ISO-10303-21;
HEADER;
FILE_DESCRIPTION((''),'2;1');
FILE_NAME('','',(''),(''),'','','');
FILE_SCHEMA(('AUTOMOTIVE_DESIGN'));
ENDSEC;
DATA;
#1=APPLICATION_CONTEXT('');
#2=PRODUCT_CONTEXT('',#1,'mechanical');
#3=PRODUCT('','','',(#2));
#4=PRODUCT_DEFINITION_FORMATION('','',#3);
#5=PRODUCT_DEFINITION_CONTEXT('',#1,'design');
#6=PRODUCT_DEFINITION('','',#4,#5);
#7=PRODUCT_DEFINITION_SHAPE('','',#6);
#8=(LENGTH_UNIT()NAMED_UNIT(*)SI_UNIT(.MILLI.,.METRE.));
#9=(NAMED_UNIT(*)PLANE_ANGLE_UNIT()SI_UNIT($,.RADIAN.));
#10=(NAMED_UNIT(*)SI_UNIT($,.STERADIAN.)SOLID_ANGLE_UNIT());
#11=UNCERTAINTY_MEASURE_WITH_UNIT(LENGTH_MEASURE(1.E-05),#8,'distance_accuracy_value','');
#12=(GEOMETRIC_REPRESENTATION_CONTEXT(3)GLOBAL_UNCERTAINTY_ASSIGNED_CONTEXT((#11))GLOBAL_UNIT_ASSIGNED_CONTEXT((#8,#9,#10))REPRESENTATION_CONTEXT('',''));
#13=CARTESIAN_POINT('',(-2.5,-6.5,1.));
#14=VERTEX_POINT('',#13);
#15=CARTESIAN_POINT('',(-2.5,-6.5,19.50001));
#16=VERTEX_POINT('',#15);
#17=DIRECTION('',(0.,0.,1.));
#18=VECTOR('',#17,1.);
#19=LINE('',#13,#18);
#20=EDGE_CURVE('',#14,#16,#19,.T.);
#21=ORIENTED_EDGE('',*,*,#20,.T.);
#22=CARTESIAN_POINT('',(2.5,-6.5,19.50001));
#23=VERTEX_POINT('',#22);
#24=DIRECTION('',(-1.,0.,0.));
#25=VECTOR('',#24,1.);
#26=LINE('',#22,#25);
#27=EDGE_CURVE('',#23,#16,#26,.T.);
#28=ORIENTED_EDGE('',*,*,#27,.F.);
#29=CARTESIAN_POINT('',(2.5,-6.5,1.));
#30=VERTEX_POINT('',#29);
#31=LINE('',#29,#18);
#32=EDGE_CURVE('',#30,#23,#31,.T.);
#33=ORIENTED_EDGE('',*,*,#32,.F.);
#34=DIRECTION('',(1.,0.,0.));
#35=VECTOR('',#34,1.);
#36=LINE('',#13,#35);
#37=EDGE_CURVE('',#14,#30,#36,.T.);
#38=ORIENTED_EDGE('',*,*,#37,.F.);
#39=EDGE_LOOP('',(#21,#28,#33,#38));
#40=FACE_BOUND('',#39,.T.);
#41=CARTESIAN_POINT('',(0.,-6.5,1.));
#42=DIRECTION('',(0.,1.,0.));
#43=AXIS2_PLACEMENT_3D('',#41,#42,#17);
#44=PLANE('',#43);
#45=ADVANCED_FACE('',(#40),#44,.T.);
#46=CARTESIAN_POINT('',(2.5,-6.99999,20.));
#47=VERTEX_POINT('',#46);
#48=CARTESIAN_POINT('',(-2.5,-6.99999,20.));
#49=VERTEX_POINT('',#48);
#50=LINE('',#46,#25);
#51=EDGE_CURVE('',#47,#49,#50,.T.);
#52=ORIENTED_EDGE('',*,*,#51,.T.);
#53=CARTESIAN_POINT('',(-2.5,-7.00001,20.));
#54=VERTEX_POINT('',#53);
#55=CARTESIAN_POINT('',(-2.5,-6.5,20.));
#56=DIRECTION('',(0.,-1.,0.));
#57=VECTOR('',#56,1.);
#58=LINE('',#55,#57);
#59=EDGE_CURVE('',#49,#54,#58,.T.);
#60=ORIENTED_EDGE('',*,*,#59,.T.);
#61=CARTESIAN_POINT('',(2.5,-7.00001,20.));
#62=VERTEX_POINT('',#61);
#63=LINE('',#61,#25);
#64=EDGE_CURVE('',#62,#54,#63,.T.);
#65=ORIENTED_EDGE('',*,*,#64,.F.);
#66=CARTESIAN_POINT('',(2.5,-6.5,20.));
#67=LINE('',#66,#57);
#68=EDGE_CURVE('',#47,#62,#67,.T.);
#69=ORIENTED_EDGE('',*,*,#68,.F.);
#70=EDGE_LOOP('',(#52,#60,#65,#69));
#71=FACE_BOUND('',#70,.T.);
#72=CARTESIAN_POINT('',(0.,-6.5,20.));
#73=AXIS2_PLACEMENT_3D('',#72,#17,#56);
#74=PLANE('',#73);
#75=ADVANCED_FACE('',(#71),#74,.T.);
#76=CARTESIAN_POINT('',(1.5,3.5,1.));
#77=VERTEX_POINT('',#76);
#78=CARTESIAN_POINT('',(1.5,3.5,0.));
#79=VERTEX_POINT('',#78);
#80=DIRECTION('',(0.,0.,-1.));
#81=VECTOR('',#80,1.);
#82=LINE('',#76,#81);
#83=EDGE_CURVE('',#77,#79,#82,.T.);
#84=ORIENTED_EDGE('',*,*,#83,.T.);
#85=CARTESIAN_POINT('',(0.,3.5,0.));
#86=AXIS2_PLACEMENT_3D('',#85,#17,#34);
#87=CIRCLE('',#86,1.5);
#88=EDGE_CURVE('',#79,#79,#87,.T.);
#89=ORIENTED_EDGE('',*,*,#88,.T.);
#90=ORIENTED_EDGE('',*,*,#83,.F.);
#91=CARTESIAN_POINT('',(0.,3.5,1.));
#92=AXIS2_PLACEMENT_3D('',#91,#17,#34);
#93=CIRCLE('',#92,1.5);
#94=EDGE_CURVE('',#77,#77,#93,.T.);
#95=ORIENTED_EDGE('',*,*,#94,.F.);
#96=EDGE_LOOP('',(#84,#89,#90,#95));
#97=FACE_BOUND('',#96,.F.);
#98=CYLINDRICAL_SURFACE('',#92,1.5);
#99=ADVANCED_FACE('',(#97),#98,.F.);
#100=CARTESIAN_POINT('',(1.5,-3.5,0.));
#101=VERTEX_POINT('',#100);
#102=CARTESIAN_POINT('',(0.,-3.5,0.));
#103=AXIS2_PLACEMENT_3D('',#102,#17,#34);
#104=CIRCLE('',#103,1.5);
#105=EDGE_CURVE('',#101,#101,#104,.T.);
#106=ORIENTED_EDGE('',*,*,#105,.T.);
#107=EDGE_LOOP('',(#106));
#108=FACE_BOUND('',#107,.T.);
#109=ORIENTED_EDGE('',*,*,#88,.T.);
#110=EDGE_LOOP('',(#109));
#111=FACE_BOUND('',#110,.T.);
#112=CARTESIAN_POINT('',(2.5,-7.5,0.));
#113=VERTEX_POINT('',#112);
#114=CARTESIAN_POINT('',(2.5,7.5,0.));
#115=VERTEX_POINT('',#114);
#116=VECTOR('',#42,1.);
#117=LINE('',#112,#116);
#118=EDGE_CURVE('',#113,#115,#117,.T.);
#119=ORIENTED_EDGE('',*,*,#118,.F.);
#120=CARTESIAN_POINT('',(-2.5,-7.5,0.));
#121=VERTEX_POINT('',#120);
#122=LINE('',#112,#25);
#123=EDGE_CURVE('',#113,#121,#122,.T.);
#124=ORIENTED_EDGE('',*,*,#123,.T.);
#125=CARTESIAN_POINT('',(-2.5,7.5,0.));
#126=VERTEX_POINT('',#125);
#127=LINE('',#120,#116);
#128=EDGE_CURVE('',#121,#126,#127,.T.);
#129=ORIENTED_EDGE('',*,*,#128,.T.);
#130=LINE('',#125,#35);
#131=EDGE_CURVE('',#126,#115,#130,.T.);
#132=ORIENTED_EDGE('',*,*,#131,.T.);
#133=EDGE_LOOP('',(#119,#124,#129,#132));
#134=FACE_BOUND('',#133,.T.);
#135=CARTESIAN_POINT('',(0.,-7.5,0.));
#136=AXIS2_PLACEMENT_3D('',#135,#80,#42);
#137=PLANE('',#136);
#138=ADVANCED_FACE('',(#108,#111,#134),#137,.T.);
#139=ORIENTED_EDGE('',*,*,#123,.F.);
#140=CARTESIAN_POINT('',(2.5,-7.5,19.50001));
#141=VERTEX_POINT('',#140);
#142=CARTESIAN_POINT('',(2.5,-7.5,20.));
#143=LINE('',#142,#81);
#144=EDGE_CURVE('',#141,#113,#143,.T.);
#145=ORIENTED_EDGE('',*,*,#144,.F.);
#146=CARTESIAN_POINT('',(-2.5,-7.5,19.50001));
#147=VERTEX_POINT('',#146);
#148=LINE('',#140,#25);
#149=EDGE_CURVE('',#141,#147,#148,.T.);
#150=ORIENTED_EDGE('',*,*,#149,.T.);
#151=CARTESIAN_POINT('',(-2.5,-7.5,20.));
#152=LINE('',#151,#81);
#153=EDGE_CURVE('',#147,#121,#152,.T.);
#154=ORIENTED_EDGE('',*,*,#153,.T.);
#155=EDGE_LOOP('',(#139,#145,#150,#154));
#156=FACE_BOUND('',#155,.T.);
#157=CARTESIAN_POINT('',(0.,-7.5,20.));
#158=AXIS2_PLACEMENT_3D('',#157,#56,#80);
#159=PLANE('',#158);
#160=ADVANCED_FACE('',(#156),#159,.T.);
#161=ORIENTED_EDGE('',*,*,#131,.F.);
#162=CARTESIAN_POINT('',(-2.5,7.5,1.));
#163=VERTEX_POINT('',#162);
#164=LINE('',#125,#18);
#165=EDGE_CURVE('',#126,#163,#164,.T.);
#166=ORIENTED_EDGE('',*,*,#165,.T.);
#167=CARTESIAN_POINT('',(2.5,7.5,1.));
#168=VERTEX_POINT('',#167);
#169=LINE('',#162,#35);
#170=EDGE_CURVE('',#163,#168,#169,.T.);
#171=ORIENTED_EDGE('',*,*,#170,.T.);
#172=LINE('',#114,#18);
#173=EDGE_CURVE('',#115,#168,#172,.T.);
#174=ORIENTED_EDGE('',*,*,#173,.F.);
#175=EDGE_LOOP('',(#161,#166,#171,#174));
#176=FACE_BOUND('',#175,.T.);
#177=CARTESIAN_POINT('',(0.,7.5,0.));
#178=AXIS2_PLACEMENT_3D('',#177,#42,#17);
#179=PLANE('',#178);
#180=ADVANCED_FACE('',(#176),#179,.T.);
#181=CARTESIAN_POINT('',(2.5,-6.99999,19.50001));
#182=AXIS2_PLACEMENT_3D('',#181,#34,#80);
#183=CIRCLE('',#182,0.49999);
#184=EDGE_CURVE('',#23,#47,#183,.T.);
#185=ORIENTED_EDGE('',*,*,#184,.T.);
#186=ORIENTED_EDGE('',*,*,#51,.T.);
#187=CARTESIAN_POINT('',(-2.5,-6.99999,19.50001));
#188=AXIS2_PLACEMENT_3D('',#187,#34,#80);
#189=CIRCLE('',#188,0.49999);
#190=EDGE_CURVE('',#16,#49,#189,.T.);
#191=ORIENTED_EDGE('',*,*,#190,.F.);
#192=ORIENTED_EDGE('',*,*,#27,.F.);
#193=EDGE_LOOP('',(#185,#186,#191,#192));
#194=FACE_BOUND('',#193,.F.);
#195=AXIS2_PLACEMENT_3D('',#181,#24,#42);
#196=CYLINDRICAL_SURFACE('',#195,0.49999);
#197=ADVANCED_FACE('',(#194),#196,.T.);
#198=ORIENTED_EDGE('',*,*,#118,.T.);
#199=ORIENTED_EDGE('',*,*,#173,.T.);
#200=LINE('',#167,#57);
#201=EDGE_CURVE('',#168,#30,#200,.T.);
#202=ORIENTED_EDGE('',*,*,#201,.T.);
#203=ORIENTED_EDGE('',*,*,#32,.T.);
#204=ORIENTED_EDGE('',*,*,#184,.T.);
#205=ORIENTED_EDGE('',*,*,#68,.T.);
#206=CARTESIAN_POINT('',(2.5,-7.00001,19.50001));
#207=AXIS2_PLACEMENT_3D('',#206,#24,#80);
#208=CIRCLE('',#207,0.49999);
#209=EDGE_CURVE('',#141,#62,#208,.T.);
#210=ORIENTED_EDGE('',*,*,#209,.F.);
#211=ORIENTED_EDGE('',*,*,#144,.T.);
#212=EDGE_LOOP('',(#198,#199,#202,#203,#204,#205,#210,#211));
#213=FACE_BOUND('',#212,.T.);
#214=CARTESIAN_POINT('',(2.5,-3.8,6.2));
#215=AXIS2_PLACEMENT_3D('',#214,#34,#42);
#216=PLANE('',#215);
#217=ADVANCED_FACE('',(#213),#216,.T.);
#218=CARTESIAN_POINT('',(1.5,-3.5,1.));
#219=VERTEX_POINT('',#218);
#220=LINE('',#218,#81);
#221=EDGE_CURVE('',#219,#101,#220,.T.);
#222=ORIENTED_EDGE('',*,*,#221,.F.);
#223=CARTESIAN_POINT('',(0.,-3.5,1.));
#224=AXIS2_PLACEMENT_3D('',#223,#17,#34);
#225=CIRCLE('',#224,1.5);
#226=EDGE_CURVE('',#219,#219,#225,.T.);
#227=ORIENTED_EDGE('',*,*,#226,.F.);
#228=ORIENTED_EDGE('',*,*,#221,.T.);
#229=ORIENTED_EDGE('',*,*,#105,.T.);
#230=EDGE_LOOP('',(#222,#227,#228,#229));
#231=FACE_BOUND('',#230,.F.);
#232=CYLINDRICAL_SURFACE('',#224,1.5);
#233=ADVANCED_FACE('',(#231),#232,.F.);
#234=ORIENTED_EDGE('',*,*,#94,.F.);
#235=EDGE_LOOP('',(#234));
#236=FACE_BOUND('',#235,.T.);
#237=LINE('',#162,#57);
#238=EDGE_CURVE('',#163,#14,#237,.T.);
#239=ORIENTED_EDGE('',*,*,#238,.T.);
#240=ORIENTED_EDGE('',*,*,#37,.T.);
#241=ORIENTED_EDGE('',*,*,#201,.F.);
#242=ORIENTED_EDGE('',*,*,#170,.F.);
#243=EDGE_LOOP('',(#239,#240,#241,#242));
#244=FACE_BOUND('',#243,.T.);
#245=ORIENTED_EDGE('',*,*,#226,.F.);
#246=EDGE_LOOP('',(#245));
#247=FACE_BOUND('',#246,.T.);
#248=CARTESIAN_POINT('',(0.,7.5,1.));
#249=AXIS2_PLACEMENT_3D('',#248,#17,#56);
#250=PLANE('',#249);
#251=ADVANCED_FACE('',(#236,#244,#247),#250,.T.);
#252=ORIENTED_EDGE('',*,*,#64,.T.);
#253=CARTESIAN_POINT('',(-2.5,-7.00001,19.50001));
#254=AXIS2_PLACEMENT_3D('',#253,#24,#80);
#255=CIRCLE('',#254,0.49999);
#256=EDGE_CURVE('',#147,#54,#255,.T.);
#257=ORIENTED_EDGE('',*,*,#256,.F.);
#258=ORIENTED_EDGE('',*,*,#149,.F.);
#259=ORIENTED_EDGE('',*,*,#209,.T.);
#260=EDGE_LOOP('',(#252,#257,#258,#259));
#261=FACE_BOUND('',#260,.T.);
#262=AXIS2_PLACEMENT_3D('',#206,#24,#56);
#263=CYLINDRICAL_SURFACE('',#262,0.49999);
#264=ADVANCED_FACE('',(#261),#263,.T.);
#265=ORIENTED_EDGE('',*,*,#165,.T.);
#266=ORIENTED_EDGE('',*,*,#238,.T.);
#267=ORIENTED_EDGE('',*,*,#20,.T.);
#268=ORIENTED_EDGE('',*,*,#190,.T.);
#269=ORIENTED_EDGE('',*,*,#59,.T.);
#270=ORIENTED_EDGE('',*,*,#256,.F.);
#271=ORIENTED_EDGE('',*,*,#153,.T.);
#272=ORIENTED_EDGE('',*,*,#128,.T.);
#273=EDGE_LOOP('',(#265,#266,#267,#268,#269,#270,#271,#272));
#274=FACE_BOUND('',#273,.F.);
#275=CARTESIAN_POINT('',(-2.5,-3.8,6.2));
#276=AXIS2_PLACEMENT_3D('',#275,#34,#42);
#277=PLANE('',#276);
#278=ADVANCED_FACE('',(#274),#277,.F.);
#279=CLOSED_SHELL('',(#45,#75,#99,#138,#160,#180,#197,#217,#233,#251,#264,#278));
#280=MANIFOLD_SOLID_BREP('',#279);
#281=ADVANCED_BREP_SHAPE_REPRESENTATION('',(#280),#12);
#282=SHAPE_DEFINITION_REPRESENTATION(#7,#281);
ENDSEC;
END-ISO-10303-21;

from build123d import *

# Parameters (mm, degrees)
F1_DEPTH = 2.5
F2_R     = 1.5
F3_DEPTH = 1
F4_R     = 0.49999


# Not quite as in the source:
# - a fillet or chamfer is up to 0.001 mm smaller than in the source, because OpenCascade refuses the exact size


with BuildPart() as f1:
    # F0 (on Right) → F1 (new body, symmetric)
    with BuildSketch(Plane.YZ):
        Polygon((-7.5, 0), (7.5, 0), (7.5, 1), (-6.5, 1), (-6.5, 20), (-7.5, 20), align=None)
    extrude(amount=F1_DEPTH, both=True)

    # F2 (on face) → F3 (cut, through all)
    with BuildSketch(Plane.XY.offset(1)):
        with Locations((0, 3.5)):
            Circle(F2_R)
        with Locations((0, -3.5)):
            Circle(F2_R)
    extrude(amount=-F3_DEPTH, mode=Mode.SUBTRACT)

    # F4 (radius 0.5 in the source; OpenCascade refuses exactly that, so slightly less here)
    f4_edges = [f1.edges().sort_by_distance(p)[0] for p in [
        (0, -6.5, 20),
        (0, -7.5, 20),
    ]]
    fillet(f4_edges, radius=F4_R)


solid = f1.part
